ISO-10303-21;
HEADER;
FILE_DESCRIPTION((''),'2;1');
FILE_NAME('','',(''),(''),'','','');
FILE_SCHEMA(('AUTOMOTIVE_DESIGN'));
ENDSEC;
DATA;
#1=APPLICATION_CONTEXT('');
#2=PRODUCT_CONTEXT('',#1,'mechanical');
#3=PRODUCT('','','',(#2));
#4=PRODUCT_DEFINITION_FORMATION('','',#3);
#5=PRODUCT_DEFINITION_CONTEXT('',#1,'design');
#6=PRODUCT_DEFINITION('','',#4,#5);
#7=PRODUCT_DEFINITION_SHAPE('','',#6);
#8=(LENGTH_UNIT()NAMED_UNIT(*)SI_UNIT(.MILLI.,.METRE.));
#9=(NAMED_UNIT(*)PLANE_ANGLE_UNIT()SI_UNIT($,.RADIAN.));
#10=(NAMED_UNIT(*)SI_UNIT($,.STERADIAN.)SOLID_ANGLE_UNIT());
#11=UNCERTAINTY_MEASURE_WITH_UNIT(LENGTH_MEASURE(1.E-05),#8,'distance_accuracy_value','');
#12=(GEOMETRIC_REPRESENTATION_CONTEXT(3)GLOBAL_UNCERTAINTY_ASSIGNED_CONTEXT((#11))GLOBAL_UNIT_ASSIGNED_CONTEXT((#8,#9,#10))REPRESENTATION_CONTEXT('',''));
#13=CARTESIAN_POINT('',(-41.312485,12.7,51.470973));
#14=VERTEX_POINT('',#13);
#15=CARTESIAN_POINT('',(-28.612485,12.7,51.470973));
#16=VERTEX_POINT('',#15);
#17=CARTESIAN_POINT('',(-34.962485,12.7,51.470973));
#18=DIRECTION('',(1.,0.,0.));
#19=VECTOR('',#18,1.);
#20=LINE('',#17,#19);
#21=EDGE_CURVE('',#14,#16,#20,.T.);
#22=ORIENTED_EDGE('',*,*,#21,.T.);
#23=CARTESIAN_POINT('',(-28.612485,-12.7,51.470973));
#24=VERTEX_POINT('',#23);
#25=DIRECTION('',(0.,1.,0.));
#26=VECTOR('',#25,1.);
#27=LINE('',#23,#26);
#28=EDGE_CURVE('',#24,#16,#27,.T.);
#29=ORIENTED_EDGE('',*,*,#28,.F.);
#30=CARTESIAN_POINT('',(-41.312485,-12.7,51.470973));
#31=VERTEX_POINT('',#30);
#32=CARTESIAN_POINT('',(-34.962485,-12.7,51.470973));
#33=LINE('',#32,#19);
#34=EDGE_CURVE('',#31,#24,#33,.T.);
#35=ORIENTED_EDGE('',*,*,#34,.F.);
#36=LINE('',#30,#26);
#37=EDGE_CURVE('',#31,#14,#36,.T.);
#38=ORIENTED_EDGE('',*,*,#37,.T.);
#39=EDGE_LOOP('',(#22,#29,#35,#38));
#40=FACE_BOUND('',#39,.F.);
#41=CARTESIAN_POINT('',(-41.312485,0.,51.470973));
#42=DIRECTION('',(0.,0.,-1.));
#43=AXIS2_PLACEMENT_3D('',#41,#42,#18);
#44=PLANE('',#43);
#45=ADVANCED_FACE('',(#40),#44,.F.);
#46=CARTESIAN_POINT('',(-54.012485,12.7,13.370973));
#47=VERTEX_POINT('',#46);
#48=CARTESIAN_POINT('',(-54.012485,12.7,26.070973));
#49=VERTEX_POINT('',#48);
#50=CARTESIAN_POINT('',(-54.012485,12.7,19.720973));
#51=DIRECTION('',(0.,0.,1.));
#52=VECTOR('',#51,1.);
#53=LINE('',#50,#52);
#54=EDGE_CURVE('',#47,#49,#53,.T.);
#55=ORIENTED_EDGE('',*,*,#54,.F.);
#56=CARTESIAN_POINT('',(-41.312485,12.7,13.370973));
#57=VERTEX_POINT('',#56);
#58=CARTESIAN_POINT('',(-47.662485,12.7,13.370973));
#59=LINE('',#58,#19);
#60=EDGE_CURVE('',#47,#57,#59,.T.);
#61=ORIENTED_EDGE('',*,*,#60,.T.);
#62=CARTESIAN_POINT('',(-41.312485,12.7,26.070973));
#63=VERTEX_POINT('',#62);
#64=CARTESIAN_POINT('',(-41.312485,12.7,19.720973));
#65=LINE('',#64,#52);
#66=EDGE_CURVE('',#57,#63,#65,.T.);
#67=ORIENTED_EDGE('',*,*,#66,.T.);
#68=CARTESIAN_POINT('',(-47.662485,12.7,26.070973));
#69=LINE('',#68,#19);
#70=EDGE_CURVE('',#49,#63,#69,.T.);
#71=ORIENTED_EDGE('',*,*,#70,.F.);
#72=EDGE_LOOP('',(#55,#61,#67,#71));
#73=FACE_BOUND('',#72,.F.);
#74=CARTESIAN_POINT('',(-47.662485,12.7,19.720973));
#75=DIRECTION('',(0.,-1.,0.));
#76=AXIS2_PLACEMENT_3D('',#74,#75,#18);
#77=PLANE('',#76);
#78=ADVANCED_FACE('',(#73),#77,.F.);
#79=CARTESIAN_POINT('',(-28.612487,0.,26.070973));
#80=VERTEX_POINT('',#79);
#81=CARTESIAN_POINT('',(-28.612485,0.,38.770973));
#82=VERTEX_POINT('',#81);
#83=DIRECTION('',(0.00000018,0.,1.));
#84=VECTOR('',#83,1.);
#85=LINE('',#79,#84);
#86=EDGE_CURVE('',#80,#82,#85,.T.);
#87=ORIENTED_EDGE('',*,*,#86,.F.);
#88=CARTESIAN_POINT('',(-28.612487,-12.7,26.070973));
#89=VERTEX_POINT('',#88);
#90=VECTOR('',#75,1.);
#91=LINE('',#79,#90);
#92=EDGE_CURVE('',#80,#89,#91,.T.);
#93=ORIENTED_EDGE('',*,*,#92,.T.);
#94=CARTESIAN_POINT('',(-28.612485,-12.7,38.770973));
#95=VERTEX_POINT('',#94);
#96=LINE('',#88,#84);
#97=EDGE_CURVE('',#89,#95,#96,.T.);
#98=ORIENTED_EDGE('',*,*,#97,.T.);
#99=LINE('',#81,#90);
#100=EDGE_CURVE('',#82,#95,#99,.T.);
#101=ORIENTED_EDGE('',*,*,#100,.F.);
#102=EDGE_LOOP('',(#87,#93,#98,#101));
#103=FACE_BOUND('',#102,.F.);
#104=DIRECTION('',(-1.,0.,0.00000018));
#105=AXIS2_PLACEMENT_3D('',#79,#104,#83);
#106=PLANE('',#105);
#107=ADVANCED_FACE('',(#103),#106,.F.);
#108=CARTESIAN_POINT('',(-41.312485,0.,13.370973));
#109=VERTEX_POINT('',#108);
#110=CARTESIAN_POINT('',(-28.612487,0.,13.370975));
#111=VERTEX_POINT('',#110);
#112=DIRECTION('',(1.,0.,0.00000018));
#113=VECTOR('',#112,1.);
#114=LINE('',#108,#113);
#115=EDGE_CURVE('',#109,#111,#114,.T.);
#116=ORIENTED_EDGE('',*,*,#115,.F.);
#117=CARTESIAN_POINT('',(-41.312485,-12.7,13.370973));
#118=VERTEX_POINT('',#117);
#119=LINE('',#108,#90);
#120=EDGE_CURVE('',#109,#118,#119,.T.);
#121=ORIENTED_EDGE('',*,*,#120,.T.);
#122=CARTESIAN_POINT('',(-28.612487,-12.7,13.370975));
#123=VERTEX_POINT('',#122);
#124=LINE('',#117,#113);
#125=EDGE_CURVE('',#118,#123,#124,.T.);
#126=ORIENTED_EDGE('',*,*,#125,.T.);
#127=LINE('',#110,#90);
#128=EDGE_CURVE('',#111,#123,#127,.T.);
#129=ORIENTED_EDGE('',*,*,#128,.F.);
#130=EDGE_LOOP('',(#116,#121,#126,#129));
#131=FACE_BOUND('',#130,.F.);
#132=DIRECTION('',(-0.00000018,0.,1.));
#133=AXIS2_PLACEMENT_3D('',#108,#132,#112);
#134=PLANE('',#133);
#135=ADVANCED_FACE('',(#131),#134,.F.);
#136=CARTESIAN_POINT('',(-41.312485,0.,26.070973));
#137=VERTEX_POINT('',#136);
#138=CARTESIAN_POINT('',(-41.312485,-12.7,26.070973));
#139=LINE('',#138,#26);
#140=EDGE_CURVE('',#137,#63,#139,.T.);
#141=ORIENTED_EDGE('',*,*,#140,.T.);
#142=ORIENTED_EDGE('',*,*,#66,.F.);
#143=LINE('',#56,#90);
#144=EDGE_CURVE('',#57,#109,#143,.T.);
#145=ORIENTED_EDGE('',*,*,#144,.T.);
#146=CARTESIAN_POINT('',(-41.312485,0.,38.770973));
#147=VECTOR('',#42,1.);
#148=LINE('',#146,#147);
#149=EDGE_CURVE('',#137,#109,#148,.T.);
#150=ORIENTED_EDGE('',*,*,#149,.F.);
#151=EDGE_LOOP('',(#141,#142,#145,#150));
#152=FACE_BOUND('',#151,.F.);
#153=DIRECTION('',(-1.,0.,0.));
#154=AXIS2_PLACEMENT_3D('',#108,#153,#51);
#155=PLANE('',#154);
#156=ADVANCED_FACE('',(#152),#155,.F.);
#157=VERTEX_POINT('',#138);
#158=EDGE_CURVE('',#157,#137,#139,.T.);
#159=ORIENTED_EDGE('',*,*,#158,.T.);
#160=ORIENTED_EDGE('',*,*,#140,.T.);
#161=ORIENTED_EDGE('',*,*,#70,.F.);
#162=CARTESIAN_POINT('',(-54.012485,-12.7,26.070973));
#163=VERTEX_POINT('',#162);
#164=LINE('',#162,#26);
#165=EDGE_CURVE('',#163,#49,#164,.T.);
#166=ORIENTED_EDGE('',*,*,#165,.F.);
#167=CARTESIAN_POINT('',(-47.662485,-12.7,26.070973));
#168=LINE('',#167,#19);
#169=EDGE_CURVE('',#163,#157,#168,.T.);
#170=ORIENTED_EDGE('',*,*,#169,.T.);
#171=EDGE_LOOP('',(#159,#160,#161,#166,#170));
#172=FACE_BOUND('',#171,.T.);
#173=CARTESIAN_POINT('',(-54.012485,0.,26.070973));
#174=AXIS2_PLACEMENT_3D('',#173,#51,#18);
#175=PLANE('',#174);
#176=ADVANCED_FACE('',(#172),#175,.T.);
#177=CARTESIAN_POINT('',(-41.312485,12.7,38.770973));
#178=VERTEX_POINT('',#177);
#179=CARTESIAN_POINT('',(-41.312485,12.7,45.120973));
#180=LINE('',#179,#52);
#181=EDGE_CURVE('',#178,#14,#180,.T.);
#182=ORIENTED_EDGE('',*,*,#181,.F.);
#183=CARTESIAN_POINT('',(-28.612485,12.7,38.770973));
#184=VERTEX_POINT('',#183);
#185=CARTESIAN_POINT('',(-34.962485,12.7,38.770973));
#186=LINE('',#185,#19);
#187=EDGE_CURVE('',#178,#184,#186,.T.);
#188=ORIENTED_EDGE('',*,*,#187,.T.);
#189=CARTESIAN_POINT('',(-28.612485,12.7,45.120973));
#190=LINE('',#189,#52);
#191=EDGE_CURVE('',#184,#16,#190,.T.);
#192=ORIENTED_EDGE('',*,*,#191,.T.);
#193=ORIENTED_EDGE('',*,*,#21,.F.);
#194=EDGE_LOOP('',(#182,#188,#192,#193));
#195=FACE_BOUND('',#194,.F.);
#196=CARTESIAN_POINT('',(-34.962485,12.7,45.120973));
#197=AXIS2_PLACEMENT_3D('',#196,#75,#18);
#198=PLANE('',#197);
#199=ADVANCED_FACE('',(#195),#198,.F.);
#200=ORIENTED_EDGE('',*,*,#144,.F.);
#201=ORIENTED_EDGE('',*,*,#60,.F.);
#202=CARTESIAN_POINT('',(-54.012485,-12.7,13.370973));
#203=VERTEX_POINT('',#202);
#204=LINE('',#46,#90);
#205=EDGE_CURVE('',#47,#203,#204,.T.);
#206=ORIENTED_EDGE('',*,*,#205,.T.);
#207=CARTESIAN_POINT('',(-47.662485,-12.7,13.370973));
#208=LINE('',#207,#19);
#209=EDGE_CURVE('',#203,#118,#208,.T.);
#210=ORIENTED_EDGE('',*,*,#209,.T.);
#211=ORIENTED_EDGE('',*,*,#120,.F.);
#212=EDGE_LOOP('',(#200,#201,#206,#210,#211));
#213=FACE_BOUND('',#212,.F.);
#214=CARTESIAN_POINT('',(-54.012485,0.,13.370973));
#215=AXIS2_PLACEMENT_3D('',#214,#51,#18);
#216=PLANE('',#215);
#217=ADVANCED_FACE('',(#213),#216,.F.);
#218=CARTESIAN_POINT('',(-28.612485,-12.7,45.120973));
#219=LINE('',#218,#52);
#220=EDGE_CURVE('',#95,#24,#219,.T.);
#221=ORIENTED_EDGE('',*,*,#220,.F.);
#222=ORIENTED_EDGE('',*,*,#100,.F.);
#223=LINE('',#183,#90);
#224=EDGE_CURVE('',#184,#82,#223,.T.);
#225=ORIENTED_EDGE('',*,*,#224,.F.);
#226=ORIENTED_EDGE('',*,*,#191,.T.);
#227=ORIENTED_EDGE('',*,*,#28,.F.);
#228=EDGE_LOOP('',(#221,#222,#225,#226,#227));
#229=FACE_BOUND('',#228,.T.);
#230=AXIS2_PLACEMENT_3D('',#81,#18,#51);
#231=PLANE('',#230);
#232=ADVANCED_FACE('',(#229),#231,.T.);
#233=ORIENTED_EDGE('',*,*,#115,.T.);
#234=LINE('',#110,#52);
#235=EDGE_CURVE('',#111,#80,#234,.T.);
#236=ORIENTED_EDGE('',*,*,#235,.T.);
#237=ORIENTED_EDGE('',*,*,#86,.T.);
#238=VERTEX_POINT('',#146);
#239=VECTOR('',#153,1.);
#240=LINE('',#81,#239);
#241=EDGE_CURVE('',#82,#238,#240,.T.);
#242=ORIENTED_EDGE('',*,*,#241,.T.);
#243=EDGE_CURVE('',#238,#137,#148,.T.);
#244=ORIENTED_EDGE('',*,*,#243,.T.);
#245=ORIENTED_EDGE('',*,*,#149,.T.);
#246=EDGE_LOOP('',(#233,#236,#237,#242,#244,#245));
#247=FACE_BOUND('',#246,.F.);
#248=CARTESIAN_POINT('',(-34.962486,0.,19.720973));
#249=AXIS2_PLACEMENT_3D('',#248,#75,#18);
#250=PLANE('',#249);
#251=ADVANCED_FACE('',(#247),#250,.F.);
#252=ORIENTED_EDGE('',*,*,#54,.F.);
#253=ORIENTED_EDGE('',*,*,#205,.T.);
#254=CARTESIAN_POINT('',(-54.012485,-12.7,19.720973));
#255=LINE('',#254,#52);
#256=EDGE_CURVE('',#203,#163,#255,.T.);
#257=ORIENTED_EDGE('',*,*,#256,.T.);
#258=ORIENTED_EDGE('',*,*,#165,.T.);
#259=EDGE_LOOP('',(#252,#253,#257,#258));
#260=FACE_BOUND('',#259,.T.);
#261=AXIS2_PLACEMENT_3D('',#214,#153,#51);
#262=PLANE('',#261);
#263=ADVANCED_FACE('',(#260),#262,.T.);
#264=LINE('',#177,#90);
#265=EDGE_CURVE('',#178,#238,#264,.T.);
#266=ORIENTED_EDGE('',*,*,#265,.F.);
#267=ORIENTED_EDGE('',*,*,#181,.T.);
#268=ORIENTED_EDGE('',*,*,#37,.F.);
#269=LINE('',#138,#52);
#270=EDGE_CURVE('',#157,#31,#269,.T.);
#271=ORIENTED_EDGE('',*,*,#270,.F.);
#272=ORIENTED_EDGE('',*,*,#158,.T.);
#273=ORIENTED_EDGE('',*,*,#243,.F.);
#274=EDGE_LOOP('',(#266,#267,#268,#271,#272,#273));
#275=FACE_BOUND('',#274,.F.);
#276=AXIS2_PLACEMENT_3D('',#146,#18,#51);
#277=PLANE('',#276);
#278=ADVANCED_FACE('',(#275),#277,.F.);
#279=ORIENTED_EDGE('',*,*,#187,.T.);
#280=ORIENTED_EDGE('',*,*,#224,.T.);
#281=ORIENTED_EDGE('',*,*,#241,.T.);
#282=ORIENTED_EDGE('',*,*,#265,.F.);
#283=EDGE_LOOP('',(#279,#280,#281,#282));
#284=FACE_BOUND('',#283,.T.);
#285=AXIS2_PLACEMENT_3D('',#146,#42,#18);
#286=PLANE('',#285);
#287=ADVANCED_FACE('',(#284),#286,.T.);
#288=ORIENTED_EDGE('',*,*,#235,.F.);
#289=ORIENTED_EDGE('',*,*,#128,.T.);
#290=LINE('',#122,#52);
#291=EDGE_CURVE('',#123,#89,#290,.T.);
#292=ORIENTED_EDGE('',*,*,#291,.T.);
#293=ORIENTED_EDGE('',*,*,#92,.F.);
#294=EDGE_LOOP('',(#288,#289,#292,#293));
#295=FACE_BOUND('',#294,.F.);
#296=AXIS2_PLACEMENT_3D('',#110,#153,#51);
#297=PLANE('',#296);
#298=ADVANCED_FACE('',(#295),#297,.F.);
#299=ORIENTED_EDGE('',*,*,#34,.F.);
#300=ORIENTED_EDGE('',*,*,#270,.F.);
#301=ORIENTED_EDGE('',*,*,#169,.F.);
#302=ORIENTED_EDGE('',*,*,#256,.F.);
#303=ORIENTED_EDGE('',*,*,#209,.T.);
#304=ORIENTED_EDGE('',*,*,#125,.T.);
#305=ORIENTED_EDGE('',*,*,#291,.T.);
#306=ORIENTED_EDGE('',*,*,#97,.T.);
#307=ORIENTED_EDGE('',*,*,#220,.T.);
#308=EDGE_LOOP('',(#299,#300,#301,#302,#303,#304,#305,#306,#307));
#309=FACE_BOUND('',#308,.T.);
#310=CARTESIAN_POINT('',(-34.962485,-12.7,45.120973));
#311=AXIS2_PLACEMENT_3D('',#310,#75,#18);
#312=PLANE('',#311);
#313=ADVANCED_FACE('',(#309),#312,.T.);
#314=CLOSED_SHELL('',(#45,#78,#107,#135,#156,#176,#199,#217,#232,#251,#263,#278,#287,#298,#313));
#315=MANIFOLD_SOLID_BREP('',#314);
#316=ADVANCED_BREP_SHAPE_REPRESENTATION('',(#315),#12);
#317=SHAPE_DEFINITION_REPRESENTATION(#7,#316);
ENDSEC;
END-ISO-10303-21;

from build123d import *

# Parameters (mm, degrees)
F1_DEPTH = 12.7
F0_W     = 12.7
F0_H     = 12.7
F2_DEPTH = 12.7


# Not quite as in the source:
# - ends of sketch curves that miss each other by under 0.0002 mm in the source are joined


with BuildPart() as f1:
    # F0 (on Front) → F1 (new body)
    with BuildSketch(Plane.XZ):
        Polygon((-28.6124870216, 26.0709726285), (-41.3124847398, 26.0709726285), (-41.3124847398, 13.3709726285), (-28.6124870216, 13.3709749104), align=None)
        Polygon((-41.3124847398, 38.7709726285), (-41.3124847398, 26.0709726285), (-28.6124870216, 26.0709726285), (-28.6124847398, 38.7709726285), align=None)
    extrude(amount=F1_DEPTH)

    # F0 (on Front) → F2 (join, symmetric)
    with BuildSketch(Plane.XZ):
        with Locations((-47.6624847398, 19.7209726285)):
            Rectangle(F0_W, F0_H)
        with Locations((-34.9624847398, 45.1209726285)):
            Rectangle(F0_W, F0_H)
    extrude(amount=F2_DEPTH, both=True)


solid = f1.part
